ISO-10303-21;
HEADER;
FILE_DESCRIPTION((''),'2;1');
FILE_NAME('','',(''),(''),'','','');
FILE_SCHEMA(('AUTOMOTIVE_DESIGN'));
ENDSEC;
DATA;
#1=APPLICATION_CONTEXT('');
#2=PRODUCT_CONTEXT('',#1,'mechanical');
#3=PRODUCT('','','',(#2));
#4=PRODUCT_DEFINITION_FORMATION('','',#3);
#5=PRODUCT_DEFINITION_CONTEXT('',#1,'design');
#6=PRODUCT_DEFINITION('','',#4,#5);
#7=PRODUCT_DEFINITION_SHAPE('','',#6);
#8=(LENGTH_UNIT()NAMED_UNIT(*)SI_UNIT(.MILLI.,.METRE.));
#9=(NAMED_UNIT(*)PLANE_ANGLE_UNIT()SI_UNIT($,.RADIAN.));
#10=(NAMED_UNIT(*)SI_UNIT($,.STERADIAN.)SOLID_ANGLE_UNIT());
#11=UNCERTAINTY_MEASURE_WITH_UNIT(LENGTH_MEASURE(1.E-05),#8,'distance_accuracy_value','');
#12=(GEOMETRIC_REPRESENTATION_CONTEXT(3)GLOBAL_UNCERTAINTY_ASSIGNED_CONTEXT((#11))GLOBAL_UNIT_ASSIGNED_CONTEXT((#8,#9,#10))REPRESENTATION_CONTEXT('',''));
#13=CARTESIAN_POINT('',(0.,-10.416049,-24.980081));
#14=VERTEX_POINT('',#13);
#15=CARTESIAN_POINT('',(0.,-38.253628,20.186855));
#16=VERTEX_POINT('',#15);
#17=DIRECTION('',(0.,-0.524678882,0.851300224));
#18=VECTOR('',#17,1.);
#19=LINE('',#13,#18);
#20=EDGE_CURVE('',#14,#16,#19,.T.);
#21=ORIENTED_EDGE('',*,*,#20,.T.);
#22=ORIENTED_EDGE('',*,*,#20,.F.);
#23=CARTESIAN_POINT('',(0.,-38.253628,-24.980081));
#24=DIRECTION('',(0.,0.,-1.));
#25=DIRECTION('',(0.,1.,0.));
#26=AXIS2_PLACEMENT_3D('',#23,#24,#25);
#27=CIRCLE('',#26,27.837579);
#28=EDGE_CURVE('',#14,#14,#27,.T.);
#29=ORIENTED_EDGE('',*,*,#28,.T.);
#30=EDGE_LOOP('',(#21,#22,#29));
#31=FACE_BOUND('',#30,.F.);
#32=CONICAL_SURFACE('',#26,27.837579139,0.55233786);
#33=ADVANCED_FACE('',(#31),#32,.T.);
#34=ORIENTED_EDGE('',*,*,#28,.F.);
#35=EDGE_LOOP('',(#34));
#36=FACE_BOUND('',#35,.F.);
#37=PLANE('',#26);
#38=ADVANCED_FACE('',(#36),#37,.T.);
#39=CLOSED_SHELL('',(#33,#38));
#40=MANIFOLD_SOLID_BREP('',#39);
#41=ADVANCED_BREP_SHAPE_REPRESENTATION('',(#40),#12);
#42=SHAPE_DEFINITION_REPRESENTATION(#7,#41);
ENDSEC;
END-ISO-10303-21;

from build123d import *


# Not quite as in the source:
# - the program builds the solid bodies; features that only make, move or delete a surface that nothing else refers to are left out


with BuildPart() as f1:
    # F0 (on Right) → F1 (revolve)
    with BuildSketch(Plane.YZ):
        Polygon((-10.4160485789, -24.9800812453), (-38.2536277175, 20.1868545264), (-38.2536277175, -24.9800812453), align=None)
    revolve(axis=Axis((0, -38.2536277175, -2.3966133595), (0, 0, -1)))


solid = f1.part
